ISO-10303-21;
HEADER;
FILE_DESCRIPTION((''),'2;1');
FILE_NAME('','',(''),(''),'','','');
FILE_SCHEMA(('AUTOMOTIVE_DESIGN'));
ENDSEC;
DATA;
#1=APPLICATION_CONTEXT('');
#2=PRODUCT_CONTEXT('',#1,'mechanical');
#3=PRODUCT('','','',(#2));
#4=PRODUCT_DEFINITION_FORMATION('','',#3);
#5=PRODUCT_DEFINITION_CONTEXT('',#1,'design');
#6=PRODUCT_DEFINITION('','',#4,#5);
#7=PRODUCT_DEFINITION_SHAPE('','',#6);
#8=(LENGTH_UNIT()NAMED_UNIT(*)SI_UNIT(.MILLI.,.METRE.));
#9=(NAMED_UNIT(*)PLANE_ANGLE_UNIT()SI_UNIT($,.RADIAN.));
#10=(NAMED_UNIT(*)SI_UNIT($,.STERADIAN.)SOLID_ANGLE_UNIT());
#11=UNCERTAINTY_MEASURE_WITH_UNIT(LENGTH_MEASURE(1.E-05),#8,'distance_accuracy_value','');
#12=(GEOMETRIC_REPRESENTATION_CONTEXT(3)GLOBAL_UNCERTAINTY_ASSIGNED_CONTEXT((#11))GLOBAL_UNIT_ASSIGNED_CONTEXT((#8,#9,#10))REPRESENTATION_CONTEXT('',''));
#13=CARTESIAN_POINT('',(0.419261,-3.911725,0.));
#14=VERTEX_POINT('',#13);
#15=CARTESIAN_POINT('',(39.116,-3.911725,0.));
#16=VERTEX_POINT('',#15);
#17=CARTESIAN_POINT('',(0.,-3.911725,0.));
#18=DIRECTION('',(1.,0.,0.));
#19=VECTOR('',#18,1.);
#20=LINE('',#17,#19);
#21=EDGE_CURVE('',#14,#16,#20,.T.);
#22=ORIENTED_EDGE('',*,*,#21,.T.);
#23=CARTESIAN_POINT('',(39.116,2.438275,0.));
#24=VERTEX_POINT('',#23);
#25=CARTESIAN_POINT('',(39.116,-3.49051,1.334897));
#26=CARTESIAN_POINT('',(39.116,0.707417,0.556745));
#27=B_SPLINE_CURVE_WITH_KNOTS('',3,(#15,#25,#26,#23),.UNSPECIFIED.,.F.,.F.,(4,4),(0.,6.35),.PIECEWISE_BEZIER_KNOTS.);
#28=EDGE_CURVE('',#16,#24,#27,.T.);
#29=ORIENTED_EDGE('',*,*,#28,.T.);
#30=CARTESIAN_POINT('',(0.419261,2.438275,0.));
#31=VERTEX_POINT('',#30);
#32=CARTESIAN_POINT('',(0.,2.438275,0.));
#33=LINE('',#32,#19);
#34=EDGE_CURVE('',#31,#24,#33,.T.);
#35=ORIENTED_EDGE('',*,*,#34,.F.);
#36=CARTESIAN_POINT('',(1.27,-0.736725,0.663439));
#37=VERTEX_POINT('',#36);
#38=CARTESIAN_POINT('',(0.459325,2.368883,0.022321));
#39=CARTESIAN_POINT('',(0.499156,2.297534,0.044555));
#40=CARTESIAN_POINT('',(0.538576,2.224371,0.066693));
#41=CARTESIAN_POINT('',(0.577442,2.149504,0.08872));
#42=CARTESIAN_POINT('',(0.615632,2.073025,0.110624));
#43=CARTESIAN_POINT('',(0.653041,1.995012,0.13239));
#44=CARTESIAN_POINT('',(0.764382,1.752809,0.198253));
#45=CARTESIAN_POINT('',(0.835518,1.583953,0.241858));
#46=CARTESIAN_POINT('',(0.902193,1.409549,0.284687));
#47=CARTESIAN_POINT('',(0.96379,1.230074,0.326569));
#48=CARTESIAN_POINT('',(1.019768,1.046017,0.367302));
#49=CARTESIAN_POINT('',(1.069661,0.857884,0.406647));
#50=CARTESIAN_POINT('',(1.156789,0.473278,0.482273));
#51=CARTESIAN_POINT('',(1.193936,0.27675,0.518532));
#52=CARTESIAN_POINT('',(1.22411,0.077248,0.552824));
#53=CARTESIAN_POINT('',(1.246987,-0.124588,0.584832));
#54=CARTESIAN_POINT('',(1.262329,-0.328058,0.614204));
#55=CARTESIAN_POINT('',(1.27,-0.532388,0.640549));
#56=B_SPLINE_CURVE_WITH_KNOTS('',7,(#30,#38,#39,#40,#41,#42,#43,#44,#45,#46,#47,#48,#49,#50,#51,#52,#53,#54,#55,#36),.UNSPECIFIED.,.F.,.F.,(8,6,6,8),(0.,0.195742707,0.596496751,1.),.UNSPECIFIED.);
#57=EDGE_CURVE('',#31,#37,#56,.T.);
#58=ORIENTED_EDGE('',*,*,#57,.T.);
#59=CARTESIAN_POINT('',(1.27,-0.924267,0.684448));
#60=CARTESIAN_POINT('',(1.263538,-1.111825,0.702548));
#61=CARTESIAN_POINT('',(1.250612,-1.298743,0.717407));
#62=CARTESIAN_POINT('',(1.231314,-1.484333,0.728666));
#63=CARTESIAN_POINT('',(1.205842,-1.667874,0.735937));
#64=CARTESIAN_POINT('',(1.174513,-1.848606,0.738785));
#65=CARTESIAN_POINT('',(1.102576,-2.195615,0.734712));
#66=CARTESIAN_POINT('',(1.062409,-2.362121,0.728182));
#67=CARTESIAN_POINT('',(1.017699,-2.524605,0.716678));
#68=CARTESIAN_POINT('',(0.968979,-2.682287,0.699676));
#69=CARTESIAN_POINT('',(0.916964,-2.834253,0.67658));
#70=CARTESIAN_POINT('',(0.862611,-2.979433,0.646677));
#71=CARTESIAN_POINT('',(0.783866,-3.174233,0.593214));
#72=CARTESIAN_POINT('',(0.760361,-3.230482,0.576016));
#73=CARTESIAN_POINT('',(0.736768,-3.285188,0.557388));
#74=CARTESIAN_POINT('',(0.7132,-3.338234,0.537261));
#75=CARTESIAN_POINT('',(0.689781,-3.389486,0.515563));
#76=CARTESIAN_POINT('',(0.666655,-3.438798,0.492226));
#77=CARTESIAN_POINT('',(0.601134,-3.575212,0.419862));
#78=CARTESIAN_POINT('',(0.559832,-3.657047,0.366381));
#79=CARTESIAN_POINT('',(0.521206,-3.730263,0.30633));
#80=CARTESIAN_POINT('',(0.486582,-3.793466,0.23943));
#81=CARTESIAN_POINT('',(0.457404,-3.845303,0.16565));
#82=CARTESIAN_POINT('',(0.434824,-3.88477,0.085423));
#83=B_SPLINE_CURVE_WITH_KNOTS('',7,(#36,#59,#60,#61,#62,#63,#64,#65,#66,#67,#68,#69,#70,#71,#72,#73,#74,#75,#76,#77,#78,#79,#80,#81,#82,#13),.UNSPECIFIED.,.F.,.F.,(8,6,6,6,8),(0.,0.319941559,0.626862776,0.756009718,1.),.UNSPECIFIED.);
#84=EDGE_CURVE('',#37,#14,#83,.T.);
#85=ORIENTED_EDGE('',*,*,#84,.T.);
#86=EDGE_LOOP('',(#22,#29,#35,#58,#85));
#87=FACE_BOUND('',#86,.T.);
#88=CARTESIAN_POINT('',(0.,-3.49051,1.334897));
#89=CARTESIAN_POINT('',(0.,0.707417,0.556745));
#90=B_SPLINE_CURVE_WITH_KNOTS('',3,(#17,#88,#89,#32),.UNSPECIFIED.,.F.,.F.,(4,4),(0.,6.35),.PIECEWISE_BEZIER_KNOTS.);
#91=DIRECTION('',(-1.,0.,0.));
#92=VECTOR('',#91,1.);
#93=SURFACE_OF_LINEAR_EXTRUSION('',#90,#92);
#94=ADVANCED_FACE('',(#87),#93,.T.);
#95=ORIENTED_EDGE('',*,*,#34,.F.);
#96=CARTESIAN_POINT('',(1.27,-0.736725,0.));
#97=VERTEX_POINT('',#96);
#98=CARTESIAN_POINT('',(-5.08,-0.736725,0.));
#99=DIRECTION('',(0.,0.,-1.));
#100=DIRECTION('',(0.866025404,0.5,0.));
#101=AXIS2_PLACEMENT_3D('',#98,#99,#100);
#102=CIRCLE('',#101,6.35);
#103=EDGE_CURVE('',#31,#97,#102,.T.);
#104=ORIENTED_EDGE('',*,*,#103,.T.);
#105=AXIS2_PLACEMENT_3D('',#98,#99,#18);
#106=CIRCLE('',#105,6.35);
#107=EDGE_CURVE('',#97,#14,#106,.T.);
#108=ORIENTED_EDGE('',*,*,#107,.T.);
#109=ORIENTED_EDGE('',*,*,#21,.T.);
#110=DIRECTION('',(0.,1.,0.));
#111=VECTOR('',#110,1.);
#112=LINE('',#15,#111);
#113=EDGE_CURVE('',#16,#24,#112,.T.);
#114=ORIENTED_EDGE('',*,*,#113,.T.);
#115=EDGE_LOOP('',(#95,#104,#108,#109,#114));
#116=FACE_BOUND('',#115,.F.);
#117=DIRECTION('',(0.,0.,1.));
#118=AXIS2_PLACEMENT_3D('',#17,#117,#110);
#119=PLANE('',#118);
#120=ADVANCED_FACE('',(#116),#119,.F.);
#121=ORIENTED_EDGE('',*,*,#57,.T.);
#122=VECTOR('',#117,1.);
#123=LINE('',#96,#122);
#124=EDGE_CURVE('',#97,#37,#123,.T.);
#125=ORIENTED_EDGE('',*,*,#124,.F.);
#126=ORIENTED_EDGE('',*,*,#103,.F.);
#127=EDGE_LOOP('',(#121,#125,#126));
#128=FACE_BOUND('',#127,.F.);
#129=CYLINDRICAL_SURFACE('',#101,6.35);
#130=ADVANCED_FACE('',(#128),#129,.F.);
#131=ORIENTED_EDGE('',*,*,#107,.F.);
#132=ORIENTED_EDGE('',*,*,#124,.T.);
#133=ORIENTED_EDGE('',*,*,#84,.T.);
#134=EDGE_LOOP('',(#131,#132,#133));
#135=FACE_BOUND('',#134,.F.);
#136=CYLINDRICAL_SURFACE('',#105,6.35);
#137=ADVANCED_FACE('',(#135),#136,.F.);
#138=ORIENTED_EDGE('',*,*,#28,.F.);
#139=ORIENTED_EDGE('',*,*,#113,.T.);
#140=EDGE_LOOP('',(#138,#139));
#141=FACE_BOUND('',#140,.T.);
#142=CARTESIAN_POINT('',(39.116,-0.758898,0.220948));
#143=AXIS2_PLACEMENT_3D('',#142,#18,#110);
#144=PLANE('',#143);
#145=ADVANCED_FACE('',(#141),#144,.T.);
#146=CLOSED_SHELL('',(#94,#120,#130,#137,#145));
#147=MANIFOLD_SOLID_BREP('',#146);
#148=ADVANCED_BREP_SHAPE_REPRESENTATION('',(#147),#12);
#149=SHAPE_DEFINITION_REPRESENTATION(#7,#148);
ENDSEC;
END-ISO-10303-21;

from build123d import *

# Parameters (mm, degrees)
F1_DEPTH = 39.116
F3_DEPTH = 7.62


with BuildPart() as f1:
    # F0 (on Right) → F1 (new body)
    with BuildSketch(Plane.YZ):
        with BuildLine():
            Line((-3.9117249368, 0), (2.4382750632, 0))
            add(Edge.make_bspline(
                [(-3.9117249368, 0), (-3.4905097758, 1.3348967768), (0.7074167952, 0.5567445187), (2.4382750632, 0)],
                knots=[0, 0, 0, 0, 6.35, 6.35, 6.35, 6.35], degree=3))
        make_face()
    extrude(amount=F1_DEPTH)

    # F2 (on face) → F3 (cut)
    with BuildSketch(Plane(origin=(0, 0, 0), x_dir=(1, 0, 0), z_dir=(0, 0, -1))):
        with BuildLine():
            ThreePointArc((0.419261314, -2.4382750632), (1.0536289969, -0.9067759996), (1.27, 0.7367249368))
            ThreePointArc((1.27, 0.7367249368), (1.0536289969, 2.3802258732), (0.419261314, 3.9117249368))
            Line((0.419261314, 3.9117249368), (0, 3.9117249368))
            Line((0, 3.9117249368), (0, 0.7367249368))
            Line((0, 0.7367249368), (0, -2.4382750632))
            Line((0, -2.4382750632), (0.419261314, -2.4382750632))
        make_face()
    extrude(amount=-F3_DEPTH, mode=Mode.SUBTRACT)


solid = f1.part
